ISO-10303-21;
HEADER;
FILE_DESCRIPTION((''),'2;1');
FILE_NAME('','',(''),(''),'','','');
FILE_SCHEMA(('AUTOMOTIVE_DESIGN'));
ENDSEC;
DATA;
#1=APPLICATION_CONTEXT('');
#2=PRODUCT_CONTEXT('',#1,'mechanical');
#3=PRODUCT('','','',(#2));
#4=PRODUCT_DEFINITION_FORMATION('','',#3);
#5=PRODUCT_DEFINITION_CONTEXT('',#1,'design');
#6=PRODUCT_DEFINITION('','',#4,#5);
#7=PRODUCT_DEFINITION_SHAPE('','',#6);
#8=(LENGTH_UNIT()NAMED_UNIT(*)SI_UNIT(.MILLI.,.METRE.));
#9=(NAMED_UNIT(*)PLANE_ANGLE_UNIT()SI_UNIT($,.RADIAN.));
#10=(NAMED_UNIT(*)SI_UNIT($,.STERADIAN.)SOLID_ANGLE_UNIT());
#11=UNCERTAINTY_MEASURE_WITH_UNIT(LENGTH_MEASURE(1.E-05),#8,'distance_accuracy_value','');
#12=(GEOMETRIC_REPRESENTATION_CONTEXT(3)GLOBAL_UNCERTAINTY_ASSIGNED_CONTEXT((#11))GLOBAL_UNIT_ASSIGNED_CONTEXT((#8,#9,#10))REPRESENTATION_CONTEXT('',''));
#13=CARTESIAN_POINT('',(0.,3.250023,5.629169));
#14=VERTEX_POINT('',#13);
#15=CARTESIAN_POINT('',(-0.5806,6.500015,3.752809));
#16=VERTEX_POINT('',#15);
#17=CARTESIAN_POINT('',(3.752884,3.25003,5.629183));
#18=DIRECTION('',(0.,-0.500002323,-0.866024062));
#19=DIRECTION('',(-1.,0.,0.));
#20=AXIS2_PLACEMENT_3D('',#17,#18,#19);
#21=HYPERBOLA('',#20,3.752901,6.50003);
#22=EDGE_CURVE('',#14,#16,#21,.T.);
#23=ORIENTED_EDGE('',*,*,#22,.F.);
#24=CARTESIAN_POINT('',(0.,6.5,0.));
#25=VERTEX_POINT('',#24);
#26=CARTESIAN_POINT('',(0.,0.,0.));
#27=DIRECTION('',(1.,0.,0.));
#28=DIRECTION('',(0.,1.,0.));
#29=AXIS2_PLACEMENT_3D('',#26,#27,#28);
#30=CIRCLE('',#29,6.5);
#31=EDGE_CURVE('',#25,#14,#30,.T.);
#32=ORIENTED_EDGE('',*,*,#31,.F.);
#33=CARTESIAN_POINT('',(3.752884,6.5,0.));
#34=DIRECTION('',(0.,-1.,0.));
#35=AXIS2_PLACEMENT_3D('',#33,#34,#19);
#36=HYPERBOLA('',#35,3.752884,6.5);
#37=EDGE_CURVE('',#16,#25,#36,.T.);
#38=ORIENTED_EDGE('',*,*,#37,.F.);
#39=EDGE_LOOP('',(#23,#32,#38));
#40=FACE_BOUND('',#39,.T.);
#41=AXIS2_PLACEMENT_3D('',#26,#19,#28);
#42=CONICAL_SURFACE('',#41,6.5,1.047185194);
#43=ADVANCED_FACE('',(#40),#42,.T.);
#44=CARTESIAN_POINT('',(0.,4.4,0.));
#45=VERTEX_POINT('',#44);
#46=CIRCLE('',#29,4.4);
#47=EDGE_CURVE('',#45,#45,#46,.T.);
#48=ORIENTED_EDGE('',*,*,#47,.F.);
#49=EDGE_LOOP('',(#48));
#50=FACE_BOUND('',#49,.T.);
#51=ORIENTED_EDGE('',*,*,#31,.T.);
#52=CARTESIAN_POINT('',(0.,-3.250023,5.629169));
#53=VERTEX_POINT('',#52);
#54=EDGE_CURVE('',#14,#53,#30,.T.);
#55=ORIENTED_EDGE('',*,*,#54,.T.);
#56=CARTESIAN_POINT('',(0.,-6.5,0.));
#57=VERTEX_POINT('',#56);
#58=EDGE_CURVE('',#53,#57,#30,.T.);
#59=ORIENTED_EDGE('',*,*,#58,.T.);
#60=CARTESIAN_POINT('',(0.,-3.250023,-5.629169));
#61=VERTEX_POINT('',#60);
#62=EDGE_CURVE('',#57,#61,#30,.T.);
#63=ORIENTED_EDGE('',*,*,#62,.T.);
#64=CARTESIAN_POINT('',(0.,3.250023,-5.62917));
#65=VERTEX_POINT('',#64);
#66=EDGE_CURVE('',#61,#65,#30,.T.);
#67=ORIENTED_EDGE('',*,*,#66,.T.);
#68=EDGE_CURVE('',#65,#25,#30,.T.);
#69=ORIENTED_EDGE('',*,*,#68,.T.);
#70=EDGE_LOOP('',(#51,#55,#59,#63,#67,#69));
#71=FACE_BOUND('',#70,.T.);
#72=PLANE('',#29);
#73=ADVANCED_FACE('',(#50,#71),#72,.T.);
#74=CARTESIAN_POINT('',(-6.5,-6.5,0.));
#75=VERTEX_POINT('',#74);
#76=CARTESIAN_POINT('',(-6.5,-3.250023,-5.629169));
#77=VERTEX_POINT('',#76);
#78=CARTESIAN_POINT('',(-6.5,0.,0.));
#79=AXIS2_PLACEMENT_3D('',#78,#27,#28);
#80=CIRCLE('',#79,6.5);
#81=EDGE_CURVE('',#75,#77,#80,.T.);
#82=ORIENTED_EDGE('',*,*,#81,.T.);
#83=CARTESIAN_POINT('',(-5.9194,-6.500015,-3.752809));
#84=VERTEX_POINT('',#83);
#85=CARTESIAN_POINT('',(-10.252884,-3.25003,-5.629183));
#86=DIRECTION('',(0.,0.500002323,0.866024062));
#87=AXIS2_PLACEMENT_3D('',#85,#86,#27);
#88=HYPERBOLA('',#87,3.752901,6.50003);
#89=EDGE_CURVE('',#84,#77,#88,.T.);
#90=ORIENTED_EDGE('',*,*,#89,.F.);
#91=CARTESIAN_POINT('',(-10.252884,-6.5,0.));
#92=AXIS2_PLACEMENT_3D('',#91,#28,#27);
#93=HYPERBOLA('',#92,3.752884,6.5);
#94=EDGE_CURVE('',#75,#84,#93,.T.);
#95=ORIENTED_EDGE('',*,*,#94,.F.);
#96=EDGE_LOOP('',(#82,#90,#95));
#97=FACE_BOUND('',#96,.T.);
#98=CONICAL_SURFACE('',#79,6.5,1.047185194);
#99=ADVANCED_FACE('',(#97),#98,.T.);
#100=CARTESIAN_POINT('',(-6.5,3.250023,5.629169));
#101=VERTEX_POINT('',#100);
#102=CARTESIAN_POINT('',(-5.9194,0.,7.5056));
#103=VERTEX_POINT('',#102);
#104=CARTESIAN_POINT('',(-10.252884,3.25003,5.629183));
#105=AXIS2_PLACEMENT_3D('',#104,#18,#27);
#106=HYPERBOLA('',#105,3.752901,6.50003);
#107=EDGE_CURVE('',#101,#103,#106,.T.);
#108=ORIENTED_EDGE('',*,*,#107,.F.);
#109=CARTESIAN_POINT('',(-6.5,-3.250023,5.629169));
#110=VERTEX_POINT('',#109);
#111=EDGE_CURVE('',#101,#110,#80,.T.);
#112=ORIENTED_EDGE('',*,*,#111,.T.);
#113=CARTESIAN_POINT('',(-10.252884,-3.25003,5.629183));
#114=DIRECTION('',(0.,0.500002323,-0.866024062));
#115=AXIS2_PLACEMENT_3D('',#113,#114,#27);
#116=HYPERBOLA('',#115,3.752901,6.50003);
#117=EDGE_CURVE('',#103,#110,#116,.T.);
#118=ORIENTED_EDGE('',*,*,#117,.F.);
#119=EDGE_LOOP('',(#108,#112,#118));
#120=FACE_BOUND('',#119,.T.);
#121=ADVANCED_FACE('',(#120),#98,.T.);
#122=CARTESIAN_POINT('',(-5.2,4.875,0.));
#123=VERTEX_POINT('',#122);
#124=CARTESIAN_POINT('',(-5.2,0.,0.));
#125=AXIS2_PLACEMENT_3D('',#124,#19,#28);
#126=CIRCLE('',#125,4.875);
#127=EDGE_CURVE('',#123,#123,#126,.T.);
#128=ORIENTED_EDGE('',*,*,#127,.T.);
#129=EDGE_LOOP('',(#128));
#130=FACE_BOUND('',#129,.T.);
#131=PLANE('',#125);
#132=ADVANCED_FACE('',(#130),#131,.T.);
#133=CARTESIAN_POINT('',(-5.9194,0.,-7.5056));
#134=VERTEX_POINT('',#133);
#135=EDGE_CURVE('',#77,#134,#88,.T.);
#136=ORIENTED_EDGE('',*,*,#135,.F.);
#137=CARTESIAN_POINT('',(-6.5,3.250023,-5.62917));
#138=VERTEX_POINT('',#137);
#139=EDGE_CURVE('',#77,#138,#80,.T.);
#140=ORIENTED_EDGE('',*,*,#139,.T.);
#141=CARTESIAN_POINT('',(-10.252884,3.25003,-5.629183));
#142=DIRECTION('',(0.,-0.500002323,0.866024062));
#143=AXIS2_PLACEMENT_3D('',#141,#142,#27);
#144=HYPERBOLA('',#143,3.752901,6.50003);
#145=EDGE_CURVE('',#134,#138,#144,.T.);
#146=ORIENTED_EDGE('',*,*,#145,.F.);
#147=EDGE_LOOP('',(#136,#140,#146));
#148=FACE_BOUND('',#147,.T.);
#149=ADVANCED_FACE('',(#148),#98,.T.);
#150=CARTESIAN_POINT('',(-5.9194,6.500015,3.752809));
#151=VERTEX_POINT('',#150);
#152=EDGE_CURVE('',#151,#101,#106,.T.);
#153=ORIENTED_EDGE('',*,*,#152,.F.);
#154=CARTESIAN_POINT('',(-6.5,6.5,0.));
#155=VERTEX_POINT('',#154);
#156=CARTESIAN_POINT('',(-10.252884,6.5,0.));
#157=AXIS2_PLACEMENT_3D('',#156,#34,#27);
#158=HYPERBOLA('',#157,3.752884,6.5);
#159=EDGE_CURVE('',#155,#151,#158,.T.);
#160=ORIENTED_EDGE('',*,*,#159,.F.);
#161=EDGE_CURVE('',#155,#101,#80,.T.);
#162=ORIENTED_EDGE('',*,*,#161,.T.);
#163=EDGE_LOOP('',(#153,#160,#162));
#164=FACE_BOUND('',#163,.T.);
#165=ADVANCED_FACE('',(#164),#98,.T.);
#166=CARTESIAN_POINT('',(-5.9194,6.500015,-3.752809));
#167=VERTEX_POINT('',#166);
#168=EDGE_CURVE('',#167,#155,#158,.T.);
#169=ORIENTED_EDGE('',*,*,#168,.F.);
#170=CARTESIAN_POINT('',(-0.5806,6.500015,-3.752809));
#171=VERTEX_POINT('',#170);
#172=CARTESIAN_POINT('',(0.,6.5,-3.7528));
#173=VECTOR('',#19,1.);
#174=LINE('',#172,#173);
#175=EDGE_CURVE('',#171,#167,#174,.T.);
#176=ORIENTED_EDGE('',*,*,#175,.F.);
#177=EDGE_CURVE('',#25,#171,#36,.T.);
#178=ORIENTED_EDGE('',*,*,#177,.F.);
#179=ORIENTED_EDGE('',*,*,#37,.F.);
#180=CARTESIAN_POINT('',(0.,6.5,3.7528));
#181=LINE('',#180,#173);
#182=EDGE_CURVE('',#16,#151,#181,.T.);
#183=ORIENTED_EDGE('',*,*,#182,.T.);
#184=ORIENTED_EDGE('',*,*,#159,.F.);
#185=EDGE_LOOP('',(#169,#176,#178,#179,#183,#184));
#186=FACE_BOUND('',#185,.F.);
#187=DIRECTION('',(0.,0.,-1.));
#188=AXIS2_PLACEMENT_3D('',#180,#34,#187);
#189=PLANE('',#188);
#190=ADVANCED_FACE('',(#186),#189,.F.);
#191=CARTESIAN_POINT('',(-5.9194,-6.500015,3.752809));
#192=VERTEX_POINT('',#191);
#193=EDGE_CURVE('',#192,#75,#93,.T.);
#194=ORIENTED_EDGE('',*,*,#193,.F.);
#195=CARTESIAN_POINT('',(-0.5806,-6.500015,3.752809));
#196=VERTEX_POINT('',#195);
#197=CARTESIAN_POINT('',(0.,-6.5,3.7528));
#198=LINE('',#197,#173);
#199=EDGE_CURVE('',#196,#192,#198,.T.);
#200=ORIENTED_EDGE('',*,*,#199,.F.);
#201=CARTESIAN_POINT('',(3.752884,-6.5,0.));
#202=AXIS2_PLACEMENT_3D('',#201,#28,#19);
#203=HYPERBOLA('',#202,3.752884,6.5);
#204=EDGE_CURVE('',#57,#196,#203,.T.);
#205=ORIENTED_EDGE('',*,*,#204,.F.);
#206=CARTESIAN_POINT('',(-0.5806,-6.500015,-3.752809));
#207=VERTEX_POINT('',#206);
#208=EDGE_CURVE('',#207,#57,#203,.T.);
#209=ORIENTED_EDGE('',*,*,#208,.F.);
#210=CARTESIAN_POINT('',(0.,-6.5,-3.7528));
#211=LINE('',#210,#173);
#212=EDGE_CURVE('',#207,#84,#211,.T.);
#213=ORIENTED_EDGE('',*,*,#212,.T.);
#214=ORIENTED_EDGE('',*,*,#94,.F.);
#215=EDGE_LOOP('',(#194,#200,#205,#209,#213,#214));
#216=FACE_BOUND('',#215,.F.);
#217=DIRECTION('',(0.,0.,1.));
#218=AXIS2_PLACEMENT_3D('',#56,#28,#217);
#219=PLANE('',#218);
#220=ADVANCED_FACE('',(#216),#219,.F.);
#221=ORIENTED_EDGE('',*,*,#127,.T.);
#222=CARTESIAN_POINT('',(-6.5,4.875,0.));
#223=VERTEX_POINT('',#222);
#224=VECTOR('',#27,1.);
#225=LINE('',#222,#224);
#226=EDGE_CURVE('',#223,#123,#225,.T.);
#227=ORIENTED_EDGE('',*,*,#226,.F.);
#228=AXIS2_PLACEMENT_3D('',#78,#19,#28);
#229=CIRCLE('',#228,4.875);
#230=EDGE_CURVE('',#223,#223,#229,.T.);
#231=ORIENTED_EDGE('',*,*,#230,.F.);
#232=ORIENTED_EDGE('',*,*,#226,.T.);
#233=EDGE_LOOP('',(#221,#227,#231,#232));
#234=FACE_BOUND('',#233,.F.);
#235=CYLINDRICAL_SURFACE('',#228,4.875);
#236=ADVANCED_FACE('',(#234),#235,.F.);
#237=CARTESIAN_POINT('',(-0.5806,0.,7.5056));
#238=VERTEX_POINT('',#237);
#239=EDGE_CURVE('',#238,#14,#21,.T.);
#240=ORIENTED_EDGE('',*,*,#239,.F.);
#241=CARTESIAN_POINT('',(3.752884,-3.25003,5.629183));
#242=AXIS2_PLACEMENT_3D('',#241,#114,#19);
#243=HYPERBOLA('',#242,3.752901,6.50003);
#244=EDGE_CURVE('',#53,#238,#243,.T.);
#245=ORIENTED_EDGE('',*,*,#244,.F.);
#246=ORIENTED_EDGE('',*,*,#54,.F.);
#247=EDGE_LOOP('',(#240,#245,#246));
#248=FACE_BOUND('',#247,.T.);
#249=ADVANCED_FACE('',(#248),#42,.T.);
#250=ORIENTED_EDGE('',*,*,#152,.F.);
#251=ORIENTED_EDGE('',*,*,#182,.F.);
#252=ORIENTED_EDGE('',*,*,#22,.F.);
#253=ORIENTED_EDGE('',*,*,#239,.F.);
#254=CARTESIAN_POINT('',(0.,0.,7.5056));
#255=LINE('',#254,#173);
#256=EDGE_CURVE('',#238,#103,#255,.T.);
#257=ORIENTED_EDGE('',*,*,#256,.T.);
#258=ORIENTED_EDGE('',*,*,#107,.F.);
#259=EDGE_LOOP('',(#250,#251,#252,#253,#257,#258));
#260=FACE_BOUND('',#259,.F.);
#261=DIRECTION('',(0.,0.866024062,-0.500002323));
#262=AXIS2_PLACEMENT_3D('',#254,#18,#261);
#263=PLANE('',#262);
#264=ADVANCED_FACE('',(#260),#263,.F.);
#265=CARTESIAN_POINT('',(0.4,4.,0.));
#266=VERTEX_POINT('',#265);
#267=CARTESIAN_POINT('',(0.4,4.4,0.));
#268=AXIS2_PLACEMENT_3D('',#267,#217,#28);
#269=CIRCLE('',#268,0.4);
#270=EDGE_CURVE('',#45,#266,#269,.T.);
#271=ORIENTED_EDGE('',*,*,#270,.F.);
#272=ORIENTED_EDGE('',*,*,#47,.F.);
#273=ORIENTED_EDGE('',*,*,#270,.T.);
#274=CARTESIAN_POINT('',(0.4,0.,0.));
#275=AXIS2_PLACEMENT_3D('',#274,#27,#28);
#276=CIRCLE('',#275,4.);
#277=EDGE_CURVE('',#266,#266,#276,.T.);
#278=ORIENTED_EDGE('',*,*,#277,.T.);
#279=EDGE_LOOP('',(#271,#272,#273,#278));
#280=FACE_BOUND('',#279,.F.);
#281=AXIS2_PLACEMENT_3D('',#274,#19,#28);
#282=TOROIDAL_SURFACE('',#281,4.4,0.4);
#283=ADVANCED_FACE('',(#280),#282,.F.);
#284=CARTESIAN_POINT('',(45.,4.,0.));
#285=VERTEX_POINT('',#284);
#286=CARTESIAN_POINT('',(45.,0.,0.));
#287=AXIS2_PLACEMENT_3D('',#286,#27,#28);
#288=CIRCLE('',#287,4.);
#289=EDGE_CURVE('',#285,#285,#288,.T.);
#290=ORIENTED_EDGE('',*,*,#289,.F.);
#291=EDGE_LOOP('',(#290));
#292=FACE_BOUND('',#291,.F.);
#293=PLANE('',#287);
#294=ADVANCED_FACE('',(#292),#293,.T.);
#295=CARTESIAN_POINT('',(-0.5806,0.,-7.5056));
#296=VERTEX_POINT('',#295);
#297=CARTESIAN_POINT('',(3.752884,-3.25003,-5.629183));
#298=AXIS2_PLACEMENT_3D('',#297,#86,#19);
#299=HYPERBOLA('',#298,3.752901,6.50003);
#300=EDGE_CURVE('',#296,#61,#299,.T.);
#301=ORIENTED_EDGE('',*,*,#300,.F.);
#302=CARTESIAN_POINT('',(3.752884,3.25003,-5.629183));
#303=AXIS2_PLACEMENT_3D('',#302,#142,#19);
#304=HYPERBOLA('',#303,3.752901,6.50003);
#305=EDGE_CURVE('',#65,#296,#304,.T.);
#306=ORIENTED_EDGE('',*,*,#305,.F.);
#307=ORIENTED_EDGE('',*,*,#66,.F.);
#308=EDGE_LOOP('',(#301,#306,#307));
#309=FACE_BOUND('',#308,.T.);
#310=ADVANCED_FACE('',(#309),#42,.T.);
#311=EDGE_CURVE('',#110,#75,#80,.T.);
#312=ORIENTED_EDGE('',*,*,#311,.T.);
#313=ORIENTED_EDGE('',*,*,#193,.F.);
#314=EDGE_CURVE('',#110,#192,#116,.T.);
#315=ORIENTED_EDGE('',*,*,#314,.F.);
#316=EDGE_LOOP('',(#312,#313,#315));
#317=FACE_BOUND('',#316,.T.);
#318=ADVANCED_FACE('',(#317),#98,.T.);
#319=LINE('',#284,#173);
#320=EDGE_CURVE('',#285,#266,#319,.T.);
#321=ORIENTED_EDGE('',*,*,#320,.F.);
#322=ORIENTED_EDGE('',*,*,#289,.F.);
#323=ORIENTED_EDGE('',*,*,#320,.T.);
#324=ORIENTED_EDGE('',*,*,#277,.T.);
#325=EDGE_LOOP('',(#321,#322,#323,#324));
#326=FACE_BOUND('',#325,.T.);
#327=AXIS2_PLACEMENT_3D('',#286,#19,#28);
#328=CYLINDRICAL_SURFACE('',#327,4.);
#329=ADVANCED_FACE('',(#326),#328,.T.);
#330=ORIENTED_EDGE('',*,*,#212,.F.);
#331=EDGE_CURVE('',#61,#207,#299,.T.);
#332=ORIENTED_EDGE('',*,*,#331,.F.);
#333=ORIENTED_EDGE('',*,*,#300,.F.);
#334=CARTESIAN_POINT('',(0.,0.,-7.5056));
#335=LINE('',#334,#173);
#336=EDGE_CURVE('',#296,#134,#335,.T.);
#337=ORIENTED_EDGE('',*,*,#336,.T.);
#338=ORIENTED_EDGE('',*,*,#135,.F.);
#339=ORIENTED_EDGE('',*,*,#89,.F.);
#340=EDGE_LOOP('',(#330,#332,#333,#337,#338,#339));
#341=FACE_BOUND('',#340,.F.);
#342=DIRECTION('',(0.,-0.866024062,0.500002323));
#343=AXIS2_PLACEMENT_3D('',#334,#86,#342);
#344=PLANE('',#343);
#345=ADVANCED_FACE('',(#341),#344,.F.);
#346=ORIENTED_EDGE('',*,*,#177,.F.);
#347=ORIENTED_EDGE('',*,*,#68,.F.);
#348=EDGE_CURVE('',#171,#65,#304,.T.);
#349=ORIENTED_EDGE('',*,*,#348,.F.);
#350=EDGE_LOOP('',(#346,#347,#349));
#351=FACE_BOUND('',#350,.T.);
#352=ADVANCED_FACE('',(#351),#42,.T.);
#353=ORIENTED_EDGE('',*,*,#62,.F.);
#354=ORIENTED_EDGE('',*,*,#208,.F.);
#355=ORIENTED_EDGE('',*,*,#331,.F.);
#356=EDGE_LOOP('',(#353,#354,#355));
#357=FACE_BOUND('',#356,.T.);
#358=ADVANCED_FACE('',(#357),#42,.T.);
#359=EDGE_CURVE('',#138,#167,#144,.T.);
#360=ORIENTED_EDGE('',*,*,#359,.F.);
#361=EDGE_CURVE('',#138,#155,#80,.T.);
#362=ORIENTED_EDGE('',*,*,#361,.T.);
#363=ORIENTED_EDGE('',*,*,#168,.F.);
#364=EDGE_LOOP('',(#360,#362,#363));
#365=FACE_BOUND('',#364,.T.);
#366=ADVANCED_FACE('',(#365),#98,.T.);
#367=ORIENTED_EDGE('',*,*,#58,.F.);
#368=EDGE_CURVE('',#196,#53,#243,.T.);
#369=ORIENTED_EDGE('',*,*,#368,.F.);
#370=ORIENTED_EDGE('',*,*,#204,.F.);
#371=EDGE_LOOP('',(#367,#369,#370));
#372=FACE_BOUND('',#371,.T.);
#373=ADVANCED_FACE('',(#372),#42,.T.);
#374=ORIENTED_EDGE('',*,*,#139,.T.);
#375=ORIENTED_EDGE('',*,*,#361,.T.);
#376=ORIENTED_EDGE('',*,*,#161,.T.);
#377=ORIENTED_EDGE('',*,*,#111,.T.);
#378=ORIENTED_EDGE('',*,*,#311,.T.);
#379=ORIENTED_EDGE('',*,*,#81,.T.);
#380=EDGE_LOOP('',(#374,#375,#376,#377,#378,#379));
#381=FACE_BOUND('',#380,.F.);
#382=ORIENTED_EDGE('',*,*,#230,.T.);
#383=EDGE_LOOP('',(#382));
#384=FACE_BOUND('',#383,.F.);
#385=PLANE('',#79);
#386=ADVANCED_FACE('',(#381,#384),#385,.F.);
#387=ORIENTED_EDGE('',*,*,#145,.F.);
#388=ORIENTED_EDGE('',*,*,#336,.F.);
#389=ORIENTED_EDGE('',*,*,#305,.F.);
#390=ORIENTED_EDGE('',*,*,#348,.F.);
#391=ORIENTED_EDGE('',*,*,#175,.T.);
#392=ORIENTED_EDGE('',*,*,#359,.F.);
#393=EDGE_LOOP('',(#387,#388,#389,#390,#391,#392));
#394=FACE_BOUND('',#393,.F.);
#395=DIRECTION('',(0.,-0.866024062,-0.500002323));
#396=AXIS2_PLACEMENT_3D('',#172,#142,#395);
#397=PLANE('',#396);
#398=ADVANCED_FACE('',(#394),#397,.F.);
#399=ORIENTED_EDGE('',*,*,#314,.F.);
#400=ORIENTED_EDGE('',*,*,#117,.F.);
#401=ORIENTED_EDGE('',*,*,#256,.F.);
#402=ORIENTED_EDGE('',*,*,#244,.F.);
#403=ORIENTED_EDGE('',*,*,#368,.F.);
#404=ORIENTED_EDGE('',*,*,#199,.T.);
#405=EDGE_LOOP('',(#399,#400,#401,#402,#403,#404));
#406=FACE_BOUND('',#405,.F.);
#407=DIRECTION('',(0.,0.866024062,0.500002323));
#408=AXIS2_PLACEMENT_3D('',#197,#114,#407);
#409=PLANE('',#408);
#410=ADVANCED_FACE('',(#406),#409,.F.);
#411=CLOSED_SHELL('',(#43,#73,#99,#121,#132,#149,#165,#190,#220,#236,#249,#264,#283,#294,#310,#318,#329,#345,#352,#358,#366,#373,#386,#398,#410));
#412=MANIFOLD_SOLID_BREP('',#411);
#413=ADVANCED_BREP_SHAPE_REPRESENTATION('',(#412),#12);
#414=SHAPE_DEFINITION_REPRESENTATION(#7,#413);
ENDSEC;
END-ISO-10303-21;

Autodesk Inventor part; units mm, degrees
ref_plane "YZ Plane" through (0, 0, 0) normal (1, 0, 0) x (0, 1, 0)
ref_plane "XZ Plane" through (0, 0, 0) normal (0, 1, 0) x (-1, 0, 0)
sketch "Sketch1" plane through (0, 0, 0) normal (0, 0, 1) x (1, 0, 0)
  line L0 (0, 4) -> (0, 0)
  line L1 (0, 0) -> (45, 0)
  line L2 (45, 0) -> (45, 4)
  line L3 (45, 4) -> (0, 4)
  line L4 (-9, 0) -> (54, 0) projected
  line L5 (0, -0.8) -> (0, 4.8) projected
  dimension "d0" = 8
  dimension "d1" = 45
revolve "Body" add sketch "Sketch1" angle 360 about axis through (0, 0, 0) along (1, 0, 0)
sketch "Sketch2" plane through (0, 0, 0) normal (1, 0, 0) x (0, 1, 0)
  line L0 (0, 7.5056) -> (6.5, 3.7528)
  line L1 (6.5, 3.7528) -> (6.5, -3.7528)
  line L2 (6.5, -3.7528) -> (0, -7.5056)
  line L3 (0, -7.5056) -> (-6.5, -3.7528)
  line L4 (-6.5, -3.7528) -> (-6.5, 3.7528)
  line L5 (-6.5, 3.7528) -> (0, 7.5056)
  line L6 (-9.1, 0) -> (9.1, 0) projected
  line L7 (0, -10.5078) -> (0, 10.5078) projected
  point P0 (0, 0)
  point P1 (0, 0)
  dimension "d2" = 13
extrude "Head" add sketch "Sketch2" against normal blind 6.5
sketch "Sketch3" plane through (-6.5, 0, 0) normal (-1, 0, 0) x (0, 1, 0)
  circle A0 centre (0, 0) radius 4.875
  point P0 (0, 0)
  dimension "d12" = 9.75
extrude "Indent1" cut sketch "Sketch3" against normal blind 1.3
sketch "Sketch4" plane through (0, 0, 0) normal (0, 0, 1) x (1, 0, 0)
  line L0 (-6.5, 7.5056) -> (-6.5, 6.5)
  line L1 (-6.5, 6.5) -> (-5.9194, 7.5056)
  line L2 (-5.9194, 7.5056) -> (-6.5, 7.5056)
  line L3 (0, 7.5056) -> (0, 6.5)
  line L4 (0, 6.5) -> (-0.5806, 7.5056)
  line L5 (-0.5806, 7.5056) -> (0, 7.5056)
  line L6 (0, 0) -> (-6.5, 0) projected
  line L7 (-6.5, 0) -> (-6.5, 6.5) projected
  line L8 (0, 0) -> (0, 6.5) projected
  line L9 (-7.8, 0) -> (1.3, 0) projected
  line L10 (-5.9194, 7.5056) -> (-0.5806, 7.5056) construction
  line L11 (0, -1.5011) -> (0, 9.0067) projected
  dimension "d6" = 30
  dimension "d7" = 30
  dimension "d16" = 13
  dimension "d17" = 13
  dimension "d18" = 15.0111
revolve "Chamfer1" cut sketch "Sketch4" angle 360 about axis through (-10, 0, 0) along (1, 0, 0)
fillet "Fillet1" radius 0.4 1 edges at (0, -4, 0)
thread "Thread" size "M8x1.25" class "6g" standard "ISO Metric profile" length 42.5
ref_plane "Work Plane1" through (3, 0, 0) normal (0, 0.5, 0.8660254) x (1, 0, 0)
equation "\"d2\" = SW"
equation "\"d3\" = KOH"
equation "\"d12\" = 0.75 * SW0"
equation "\"d14\" = 0.2 * KOH"
equation "\"d11\" = RR"
equation "\"d8\" = GEL"
equation "\"d0\" = GD"
equation "\"d1\" = NLG"
equation "\"d6\" = ANG1"
equation "\"d7\" = ANG1"
equation "\"d16\" = SW0"
equation "\"d17\" = SW0"
equation "\"d18\" = 1.1547 * SW"
equation "\"NLG\" = 45"
equation "\"KOH\" = 6.5"
equation "\"GD\" = NND"
equation "\"GEL\" = 42.5"
equation "\"SW\" = 13"
equation "\"SW0\" = SW"
equation "\"ANG1\" = 30deg"
equation "\"RR\" = 0.4"
equation "\"GUL\" = 0.61345 * PTC"
equation "\"SPD\" = NND - 1.2269 * PTC"
equation "\"GD1\" = THREADDIA - 1.2269 * PTC"
equation "\"THREADDIA\" = 8"
equation "\"SDH\" = 9.2"
equation "\"TOA\" = 30deg"
equation "\"BDM\" = NND"
equation "\"FAWI\" = 45deg"
equation "\"PTC\" = 1.25"
equation "\"NND\" = 8"
equation "\"GAL\" = 0.61345 * PTC"
equation "\"SD\" = 0"
equation "\"SD2\" = SDH"
equation "\"E0\" = 1.155 * SW"
properties part number "AS 1427 - M8 x 45" material "Steel, Mild"
